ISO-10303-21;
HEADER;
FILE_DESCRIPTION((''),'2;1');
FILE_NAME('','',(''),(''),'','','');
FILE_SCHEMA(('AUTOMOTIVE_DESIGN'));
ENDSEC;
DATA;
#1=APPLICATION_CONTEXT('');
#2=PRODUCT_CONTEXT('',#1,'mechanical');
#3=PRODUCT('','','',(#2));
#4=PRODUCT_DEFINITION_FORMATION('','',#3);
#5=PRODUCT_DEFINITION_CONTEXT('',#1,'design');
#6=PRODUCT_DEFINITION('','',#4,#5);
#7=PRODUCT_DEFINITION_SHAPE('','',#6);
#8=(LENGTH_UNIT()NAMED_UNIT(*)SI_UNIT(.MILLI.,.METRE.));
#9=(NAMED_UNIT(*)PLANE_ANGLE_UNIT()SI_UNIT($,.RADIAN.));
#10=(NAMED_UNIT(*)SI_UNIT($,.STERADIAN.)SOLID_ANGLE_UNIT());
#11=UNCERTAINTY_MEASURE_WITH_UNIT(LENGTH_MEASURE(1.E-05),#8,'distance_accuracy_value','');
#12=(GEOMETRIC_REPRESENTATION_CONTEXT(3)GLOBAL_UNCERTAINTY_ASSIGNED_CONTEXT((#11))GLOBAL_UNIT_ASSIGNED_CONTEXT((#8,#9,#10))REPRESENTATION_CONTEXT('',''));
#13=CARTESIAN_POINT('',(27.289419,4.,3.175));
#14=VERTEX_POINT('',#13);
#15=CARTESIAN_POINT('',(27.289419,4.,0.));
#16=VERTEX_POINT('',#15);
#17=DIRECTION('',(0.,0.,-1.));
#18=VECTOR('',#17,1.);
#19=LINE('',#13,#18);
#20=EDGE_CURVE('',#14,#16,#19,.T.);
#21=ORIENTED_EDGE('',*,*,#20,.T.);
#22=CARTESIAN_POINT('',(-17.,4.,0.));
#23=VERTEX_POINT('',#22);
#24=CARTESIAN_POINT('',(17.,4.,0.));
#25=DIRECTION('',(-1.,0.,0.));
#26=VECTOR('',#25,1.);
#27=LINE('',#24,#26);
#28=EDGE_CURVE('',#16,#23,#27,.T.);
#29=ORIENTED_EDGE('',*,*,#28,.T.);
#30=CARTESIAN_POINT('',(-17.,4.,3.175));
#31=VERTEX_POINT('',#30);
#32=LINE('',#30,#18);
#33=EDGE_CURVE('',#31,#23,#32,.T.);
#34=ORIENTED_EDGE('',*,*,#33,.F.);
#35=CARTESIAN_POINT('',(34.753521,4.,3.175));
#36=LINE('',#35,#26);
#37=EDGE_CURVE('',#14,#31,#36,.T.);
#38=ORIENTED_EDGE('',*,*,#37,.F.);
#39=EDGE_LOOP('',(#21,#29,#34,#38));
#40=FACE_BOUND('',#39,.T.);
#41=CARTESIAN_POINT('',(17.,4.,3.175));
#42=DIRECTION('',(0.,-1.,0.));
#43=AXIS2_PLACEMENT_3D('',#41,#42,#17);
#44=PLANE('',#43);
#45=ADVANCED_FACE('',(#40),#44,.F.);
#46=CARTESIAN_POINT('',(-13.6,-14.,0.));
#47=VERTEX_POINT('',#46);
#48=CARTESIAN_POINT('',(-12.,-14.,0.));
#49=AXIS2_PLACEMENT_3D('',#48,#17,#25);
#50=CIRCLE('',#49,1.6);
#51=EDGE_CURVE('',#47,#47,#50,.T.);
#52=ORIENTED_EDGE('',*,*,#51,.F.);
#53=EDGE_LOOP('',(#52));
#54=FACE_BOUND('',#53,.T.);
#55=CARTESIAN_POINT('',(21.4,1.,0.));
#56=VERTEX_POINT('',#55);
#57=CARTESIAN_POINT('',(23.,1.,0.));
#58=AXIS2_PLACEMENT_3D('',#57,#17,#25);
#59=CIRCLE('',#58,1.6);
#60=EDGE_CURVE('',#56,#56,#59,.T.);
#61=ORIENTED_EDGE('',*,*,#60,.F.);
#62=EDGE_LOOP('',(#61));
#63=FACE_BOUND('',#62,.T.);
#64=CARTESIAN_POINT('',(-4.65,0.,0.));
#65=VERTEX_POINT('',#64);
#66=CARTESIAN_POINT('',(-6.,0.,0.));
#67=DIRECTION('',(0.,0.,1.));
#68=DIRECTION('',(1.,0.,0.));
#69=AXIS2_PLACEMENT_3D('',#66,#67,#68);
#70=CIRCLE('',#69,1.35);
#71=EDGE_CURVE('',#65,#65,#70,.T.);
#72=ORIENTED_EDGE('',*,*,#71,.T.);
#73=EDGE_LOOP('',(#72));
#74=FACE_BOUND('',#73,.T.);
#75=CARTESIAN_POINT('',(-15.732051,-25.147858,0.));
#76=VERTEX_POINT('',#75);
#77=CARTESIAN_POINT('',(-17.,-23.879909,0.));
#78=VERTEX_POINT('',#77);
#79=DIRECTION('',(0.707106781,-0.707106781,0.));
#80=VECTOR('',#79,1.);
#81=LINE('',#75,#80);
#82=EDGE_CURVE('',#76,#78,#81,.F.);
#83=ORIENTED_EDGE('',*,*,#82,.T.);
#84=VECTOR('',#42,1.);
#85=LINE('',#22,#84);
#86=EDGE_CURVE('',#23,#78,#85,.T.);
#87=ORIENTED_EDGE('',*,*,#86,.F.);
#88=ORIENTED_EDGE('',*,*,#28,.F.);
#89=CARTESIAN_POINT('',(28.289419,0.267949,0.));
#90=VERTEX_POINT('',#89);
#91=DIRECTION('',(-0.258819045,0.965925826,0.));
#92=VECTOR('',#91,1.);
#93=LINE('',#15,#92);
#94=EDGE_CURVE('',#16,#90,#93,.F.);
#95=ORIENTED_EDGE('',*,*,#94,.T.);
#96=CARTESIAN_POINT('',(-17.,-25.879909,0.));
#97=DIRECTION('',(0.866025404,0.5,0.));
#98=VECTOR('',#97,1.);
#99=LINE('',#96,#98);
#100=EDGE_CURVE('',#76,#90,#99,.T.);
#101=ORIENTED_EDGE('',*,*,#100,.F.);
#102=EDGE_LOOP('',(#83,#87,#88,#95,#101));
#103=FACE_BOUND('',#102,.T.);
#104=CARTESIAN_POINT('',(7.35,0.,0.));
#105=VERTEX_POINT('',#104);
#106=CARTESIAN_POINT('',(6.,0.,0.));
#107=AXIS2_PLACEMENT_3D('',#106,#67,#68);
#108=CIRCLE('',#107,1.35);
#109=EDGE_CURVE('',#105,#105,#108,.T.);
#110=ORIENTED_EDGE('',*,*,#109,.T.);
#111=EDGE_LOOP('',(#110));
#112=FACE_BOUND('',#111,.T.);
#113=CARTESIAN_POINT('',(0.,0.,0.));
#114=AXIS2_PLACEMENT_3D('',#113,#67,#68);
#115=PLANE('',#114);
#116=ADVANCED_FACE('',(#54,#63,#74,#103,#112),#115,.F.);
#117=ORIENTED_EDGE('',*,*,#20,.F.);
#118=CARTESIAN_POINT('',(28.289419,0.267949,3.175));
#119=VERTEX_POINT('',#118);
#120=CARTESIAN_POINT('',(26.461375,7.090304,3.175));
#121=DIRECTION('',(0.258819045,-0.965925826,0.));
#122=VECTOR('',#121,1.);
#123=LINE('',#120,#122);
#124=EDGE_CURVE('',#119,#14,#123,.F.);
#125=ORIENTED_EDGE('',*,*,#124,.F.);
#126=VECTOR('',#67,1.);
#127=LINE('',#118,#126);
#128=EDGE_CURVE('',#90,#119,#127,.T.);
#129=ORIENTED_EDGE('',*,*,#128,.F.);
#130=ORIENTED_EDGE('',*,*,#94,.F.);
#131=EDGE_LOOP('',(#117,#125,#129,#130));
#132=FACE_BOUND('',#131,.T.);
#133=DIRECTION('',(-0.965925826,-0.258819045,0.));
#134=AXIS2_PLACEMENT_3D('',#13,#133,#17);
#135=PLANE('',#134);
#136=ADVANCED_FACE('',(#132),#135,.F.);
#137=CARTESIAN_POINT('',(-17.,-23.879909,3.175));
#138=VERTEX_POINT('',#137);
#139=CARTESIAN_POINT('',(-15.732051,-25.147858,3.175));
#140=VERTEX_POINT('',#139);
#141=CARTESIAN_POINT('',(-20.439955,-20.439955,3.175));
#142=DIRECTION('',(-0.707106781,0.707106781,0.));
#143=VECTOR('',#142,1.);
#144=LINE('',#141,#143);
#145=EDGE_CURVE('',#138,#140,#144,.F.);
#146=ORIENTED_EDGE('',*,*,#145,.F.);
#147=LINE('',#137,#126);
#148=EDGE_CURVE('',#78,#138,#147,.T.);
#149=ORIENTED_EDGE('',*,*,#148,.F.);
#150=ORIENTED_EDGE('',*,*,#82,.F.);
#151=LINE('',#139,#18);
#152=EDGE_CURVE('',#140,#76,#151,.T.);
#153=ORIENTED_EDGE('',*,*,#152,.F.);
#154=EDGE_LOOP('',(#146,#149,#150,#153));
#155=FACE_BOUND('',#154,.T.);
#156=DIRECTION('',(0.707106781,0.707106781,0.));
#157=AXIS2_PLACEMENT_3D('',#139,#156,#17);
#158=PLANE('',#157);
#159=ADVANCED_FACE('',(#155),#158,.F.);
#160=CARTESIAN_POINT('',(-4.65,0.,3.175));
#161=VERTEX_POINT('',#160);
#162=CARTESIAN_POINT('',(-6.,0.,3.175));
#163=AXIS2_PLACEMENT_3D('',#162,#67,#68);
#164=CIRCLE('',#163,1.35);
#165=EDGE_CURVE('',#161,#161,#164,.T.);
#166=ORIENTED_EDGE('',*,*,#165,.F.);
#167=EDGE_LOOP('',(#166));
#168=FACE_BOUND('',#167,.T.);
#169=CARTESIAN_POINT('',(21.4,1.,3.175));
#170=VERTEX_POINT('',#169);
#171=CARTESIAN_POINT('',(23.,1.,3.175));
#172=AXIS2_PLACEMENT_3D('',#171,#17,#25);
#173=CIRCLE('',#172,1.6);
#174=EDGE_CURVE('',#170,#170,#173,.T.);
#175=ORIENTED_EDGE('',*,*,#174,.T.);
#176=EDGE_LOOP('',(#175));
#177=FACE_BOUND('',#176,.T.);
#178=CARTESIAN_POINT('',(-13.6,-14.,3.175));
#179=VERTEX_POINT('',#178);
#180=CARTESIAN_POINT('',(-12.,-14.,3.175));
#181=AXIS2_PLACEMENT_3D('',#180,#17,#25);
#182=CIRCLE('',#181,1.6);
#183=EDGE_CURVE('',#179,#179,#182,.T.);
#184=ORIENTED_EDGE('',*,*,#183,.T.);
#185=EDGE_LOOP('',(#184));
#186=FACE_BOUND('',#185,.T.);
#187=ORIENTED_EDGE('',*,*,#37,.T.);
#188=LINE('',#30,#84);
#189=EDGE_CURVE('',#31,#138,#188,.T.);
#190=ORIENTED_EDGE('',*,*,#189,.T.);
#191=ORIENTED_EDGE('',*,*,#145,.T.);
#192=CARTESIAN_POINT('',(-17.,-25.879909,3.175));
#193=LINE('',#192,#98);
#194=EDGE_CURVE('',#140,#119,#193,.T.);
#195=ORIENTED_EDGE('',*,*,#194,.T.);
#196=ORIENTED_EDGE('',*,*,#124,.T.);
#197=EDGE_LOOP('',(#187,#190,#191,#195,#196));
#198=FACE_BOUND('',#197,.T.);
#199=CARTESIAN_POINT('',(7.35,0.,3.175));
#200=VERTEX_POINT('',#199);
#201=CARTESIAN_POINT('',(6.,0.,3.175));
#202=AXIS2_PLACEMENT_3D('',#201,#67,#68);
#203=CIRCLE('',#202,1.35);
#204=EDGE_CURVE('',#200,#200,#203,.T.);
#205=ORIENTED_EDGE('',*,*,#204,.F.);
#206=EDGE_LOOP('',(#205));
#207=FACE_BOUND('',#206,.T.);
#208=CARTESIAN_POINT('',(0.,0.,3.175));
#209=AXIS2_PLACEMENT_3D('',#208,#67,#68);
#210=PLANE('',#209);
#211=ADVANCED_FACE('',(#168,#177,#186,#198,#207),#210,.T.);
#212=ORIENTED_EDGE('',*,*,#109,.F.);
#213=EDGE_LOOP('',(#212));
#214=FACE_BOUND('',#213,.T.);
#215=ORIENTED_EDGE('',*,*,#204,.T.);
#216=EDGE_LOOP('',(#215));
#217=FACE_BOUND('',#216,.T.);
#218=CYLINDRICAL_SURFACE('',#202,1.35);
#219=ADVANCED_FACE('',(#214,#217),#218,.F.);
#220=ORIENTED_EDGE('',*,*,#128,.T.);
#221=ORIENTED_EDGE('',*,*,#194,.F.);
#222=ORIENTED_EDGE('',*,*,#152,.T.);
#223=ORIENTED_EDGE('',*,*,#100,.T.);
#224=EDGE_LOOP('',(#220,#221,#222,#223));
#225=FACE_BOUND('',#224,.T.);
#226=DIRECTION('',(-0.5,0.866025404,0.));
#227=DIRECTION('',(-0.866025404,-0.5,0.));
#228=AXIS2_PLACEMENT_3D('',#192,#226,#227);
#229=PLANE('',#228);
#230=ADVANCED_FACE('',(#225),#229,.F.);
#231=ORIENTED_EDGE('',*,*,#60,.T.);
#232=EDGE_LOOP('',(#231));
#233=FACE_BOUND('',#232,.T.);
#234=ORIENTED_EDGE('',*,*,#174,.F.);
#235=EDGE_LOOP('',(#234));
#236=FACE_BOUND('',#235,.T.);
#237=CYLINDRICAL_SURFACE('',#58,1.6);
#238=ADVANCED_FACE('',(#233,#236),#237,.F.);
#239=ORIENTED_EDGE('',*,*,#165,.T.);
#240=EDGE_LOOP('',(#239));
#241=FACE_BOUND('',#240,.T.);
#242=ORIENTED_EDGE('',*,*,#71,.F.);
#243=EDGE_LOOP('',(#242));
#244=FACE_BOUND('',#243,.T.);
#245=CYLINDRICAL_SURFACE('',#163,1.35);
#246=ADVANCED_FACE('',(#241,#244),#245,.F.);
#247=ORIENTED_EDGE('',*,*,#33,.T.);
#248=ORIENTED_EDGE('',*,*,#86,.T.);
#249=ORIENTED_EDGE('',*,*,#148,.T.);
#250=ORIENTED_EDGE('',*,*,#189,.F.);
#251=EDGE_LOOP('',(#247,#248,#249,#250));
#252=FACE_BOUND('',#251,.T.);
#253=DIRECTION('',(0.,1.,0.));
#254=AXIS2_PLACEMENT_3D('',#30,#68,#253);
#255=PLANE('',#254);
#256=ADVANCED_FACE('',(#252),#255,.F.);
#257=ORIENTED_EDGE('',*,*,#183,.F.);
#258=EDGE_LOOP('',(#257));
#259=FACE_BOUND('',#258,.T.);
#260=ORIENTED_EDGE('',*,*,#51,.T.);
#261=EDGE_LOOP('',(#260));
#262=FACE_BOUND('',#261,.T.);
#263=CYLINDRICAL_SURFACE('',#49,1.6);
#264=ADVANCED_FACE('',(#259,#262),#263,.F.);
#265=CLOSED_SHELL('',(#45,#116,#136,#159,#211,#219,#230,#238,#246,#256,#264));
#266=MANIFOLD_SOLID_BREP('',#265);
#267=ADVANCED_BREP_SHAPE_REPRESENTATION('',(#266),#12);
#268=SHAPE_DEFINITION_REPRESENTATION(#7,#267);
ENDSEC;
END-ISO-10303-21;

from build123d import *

# Parameters (mm, degrees)
BOSS_EXTRUDE1_DEPTH    = 3.175
M2_5_CLEARANCE_HOLE1_D = 2.7
CHAMFER1_SIZE          = 2
CHAMFER1_SIZE2         = 1.464101615
M3_CLEARANCE_HOLE1_D   = 3.2


with BuildPart() as part:
    # Sketch2 → Boss-Extrude1 (new body)
    with BuildSketch(Plane.XY):
        Polygon((17, 4), (-17, 4), (-17, -25.879909152), (34.753520778, 4), align=None)
    extrude(amount=BOSS_EXTRUDE1_DEPTH)

    # M2.5 Clearance Hole1 (through all)
    with Locations(Plane.XY.offset(3.175)):
        with Locations((-6, 0), (6, 0)):
            Hole(M2_5_CLEARANCE_HOLE1_D / 2)

    # Fillet1
    # the kernel refuses this chamfer: 2 mm, written as the material it takes off along each edge
    with BuildSketch(Plane(origin=(34.753520778, 4, -18.713015054), x_dir=(-0.9999467105068274, 0.01032357237467217, 0), z_dir=(0, 0, 1))) as fillet1_piece_1:
        with BuildLine():
            Line((7.485206022, 0), (6.403726885, 3.875640743))
            Line((6.403726885, 3.875640743), (6.383370332, 3.910073441))
            ThreePointArc((6.383370332, 3.910073441), (3.20116981, 1.938993637), (-0.020356553, 0.034432699))
            Line((-0.020356553, 0.034432699), (0.000412943, -0.039997868))
            ThreePointArc((0.000412943, -0.039997868), (3.742617081, -0.001362894), (7.485618964, -0.039997868))
            Line((7.485618964, -0.039997868), (7.485206022, 0))
        make_face()
    extrude(amount=40.601030108, mode=Mode.SUBTRACT)

    # Chamfer1
    chamfer1_edges = [part.edges().sort_by_distance(p)[0] for p in [
        (-17, -25.879909152, 1.5875),
    ]]
    chamfer1_side = [part.faces().sort_by_distance(p)[0] for p in [
        (-17, -10.939954576, 1.5875),
    ]]
    chamfer(chamfer1_edges, length=CHAMFER1_SIZE, length2=CHAMFER1_SIZE2, reference=chamfer1_side[0])

    # M3 Clearance Hole1 (through all)
    with Locations(Plane(origin=(0, 0, 0), x_dir=(-1, 0, 0), z_dir=(0, 0, -1))):
        with Locations((-23, 1), (12, -14)):
            Hole(M3_CLEARANCE_HOLE1_D / 2)


solid = part.part
